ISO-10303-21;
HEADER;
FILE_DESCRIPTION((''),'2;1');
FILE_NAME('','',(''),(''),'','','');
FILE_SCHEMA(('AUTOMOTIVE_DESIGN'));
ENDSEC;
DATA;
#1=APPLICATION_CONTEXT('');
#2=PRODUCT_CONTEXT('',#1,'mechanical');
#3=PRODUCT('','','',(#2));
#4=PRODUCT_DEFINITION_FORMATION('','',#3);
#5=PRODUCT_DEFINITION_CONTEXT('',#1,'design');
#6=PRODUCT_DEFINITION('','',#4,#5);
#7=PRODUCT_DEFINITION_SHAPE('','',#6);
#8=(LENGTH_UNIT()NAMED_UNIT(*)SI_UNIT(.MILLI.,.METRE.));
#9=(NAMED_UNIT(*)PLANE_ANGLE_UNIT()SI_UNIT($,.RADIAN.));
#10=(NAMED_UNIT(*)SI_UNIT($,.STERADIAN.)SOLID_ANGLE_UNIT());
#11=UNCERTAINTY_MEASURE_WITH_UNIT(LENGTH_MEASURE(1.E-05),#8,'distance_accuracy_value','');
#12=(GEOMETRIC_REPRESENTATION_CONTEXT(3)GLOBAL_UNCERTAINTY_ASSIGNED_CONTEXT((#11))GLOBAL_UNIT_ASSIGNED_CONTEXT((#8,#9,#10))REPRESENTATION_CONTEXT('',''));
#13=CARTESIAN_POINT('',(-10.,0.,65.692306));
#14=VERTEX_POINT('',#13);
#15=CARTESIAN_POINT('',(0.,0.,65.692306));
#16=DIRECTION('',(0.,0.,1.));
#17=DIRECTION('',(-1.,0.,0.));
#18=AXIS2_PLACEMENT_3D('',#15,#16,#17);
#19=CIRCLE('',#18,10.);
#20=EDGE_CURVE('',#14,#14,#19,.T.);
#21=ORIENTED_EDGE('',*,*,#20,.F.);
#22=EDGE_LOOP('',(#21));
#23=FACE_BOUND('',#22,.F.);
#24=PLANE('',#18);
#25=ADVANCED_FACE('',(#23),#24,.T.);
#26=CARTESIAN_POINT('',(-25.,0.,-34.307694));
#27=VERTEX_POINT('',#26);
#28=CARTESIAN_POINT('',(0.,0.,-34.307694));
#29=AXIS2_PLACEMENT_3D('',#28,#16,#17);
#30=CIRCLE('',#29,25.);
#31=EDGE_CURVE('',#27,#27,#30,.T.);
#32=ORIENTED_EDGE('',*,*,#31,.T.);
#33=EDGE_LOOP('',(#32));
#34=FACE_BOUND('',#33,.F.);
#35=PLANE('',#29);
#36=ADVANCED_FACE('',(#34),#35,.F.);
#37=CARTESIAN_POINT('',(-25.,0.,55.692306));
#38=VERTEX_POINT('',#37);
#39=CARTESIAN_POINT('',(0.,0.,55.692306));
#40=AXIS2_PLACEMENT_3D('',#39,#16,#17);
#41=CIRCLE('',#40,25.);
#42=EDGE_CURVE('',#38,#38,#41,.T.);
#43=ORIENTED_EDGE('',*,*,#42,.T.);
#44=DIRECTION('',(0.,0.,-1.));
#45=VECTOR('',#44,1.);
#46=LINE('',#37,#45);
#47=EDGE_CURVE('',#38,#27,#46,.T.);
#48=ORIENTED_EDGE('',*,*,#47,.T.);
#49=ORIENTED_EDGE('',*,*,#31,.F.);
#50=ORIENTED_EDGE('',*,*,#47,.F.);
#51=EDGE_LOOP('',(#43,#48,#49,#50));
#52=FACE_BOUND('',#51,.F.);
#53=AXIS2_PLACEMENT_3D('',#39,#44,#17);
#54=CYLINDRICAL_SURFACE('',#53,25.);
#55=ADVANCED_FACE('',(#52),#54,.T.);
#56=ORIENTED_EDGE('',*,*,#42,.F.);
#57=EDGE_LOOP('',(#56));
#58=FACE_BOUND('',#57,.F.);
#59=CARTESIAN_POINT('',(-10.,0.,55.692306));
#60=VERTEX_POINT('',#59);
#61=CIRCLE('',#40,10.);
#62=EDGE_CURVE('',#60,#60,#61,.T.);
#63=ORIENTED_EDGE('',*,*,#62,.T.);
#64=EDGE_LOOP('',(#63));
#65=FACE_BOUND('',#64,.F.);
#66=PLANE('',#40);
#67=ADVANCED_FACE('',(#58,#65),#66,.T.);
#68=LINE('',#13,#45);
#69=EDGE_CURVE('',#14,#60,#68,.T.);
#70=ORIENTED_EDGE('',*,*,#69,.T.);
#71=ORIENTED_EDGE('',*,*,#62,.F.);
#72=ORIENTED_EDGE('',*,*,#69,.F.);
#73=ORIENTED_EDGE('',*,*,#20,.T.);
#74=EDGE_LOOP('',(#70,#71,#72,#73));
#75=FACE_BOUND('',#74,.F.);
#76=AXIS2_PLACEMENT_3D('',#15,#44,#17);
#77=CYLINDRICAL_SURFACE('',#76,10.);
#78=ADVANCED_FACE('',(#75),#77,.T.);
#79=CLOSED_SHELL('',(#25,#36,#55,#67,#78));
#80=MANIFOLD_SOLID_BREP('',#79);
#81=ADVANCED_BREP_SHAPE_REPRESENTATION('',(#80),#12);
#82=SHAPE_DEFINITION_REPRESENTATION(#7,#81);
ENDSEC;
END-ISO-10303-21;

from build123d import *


# Not quite as in the source:
# - the program builds the solid bodies; features that only make, move or delete a surface that nothing else refers to are left out


with BuildPart() as f1:
    # F0 (on Front) → F1 (revolve)
    with BuildSketch(Plane.XZ):
        Polygon((0, -34.307694056), (0, 65.692305944), (-10, 65.692305944), (-10, 55.692305944), (-25, 55.692305944), (-25, -34.307694056), align=None)
    revolve(axis=Axis((0, 0, 15.692305944), (0, 0, 1)))


solid = f1.part
